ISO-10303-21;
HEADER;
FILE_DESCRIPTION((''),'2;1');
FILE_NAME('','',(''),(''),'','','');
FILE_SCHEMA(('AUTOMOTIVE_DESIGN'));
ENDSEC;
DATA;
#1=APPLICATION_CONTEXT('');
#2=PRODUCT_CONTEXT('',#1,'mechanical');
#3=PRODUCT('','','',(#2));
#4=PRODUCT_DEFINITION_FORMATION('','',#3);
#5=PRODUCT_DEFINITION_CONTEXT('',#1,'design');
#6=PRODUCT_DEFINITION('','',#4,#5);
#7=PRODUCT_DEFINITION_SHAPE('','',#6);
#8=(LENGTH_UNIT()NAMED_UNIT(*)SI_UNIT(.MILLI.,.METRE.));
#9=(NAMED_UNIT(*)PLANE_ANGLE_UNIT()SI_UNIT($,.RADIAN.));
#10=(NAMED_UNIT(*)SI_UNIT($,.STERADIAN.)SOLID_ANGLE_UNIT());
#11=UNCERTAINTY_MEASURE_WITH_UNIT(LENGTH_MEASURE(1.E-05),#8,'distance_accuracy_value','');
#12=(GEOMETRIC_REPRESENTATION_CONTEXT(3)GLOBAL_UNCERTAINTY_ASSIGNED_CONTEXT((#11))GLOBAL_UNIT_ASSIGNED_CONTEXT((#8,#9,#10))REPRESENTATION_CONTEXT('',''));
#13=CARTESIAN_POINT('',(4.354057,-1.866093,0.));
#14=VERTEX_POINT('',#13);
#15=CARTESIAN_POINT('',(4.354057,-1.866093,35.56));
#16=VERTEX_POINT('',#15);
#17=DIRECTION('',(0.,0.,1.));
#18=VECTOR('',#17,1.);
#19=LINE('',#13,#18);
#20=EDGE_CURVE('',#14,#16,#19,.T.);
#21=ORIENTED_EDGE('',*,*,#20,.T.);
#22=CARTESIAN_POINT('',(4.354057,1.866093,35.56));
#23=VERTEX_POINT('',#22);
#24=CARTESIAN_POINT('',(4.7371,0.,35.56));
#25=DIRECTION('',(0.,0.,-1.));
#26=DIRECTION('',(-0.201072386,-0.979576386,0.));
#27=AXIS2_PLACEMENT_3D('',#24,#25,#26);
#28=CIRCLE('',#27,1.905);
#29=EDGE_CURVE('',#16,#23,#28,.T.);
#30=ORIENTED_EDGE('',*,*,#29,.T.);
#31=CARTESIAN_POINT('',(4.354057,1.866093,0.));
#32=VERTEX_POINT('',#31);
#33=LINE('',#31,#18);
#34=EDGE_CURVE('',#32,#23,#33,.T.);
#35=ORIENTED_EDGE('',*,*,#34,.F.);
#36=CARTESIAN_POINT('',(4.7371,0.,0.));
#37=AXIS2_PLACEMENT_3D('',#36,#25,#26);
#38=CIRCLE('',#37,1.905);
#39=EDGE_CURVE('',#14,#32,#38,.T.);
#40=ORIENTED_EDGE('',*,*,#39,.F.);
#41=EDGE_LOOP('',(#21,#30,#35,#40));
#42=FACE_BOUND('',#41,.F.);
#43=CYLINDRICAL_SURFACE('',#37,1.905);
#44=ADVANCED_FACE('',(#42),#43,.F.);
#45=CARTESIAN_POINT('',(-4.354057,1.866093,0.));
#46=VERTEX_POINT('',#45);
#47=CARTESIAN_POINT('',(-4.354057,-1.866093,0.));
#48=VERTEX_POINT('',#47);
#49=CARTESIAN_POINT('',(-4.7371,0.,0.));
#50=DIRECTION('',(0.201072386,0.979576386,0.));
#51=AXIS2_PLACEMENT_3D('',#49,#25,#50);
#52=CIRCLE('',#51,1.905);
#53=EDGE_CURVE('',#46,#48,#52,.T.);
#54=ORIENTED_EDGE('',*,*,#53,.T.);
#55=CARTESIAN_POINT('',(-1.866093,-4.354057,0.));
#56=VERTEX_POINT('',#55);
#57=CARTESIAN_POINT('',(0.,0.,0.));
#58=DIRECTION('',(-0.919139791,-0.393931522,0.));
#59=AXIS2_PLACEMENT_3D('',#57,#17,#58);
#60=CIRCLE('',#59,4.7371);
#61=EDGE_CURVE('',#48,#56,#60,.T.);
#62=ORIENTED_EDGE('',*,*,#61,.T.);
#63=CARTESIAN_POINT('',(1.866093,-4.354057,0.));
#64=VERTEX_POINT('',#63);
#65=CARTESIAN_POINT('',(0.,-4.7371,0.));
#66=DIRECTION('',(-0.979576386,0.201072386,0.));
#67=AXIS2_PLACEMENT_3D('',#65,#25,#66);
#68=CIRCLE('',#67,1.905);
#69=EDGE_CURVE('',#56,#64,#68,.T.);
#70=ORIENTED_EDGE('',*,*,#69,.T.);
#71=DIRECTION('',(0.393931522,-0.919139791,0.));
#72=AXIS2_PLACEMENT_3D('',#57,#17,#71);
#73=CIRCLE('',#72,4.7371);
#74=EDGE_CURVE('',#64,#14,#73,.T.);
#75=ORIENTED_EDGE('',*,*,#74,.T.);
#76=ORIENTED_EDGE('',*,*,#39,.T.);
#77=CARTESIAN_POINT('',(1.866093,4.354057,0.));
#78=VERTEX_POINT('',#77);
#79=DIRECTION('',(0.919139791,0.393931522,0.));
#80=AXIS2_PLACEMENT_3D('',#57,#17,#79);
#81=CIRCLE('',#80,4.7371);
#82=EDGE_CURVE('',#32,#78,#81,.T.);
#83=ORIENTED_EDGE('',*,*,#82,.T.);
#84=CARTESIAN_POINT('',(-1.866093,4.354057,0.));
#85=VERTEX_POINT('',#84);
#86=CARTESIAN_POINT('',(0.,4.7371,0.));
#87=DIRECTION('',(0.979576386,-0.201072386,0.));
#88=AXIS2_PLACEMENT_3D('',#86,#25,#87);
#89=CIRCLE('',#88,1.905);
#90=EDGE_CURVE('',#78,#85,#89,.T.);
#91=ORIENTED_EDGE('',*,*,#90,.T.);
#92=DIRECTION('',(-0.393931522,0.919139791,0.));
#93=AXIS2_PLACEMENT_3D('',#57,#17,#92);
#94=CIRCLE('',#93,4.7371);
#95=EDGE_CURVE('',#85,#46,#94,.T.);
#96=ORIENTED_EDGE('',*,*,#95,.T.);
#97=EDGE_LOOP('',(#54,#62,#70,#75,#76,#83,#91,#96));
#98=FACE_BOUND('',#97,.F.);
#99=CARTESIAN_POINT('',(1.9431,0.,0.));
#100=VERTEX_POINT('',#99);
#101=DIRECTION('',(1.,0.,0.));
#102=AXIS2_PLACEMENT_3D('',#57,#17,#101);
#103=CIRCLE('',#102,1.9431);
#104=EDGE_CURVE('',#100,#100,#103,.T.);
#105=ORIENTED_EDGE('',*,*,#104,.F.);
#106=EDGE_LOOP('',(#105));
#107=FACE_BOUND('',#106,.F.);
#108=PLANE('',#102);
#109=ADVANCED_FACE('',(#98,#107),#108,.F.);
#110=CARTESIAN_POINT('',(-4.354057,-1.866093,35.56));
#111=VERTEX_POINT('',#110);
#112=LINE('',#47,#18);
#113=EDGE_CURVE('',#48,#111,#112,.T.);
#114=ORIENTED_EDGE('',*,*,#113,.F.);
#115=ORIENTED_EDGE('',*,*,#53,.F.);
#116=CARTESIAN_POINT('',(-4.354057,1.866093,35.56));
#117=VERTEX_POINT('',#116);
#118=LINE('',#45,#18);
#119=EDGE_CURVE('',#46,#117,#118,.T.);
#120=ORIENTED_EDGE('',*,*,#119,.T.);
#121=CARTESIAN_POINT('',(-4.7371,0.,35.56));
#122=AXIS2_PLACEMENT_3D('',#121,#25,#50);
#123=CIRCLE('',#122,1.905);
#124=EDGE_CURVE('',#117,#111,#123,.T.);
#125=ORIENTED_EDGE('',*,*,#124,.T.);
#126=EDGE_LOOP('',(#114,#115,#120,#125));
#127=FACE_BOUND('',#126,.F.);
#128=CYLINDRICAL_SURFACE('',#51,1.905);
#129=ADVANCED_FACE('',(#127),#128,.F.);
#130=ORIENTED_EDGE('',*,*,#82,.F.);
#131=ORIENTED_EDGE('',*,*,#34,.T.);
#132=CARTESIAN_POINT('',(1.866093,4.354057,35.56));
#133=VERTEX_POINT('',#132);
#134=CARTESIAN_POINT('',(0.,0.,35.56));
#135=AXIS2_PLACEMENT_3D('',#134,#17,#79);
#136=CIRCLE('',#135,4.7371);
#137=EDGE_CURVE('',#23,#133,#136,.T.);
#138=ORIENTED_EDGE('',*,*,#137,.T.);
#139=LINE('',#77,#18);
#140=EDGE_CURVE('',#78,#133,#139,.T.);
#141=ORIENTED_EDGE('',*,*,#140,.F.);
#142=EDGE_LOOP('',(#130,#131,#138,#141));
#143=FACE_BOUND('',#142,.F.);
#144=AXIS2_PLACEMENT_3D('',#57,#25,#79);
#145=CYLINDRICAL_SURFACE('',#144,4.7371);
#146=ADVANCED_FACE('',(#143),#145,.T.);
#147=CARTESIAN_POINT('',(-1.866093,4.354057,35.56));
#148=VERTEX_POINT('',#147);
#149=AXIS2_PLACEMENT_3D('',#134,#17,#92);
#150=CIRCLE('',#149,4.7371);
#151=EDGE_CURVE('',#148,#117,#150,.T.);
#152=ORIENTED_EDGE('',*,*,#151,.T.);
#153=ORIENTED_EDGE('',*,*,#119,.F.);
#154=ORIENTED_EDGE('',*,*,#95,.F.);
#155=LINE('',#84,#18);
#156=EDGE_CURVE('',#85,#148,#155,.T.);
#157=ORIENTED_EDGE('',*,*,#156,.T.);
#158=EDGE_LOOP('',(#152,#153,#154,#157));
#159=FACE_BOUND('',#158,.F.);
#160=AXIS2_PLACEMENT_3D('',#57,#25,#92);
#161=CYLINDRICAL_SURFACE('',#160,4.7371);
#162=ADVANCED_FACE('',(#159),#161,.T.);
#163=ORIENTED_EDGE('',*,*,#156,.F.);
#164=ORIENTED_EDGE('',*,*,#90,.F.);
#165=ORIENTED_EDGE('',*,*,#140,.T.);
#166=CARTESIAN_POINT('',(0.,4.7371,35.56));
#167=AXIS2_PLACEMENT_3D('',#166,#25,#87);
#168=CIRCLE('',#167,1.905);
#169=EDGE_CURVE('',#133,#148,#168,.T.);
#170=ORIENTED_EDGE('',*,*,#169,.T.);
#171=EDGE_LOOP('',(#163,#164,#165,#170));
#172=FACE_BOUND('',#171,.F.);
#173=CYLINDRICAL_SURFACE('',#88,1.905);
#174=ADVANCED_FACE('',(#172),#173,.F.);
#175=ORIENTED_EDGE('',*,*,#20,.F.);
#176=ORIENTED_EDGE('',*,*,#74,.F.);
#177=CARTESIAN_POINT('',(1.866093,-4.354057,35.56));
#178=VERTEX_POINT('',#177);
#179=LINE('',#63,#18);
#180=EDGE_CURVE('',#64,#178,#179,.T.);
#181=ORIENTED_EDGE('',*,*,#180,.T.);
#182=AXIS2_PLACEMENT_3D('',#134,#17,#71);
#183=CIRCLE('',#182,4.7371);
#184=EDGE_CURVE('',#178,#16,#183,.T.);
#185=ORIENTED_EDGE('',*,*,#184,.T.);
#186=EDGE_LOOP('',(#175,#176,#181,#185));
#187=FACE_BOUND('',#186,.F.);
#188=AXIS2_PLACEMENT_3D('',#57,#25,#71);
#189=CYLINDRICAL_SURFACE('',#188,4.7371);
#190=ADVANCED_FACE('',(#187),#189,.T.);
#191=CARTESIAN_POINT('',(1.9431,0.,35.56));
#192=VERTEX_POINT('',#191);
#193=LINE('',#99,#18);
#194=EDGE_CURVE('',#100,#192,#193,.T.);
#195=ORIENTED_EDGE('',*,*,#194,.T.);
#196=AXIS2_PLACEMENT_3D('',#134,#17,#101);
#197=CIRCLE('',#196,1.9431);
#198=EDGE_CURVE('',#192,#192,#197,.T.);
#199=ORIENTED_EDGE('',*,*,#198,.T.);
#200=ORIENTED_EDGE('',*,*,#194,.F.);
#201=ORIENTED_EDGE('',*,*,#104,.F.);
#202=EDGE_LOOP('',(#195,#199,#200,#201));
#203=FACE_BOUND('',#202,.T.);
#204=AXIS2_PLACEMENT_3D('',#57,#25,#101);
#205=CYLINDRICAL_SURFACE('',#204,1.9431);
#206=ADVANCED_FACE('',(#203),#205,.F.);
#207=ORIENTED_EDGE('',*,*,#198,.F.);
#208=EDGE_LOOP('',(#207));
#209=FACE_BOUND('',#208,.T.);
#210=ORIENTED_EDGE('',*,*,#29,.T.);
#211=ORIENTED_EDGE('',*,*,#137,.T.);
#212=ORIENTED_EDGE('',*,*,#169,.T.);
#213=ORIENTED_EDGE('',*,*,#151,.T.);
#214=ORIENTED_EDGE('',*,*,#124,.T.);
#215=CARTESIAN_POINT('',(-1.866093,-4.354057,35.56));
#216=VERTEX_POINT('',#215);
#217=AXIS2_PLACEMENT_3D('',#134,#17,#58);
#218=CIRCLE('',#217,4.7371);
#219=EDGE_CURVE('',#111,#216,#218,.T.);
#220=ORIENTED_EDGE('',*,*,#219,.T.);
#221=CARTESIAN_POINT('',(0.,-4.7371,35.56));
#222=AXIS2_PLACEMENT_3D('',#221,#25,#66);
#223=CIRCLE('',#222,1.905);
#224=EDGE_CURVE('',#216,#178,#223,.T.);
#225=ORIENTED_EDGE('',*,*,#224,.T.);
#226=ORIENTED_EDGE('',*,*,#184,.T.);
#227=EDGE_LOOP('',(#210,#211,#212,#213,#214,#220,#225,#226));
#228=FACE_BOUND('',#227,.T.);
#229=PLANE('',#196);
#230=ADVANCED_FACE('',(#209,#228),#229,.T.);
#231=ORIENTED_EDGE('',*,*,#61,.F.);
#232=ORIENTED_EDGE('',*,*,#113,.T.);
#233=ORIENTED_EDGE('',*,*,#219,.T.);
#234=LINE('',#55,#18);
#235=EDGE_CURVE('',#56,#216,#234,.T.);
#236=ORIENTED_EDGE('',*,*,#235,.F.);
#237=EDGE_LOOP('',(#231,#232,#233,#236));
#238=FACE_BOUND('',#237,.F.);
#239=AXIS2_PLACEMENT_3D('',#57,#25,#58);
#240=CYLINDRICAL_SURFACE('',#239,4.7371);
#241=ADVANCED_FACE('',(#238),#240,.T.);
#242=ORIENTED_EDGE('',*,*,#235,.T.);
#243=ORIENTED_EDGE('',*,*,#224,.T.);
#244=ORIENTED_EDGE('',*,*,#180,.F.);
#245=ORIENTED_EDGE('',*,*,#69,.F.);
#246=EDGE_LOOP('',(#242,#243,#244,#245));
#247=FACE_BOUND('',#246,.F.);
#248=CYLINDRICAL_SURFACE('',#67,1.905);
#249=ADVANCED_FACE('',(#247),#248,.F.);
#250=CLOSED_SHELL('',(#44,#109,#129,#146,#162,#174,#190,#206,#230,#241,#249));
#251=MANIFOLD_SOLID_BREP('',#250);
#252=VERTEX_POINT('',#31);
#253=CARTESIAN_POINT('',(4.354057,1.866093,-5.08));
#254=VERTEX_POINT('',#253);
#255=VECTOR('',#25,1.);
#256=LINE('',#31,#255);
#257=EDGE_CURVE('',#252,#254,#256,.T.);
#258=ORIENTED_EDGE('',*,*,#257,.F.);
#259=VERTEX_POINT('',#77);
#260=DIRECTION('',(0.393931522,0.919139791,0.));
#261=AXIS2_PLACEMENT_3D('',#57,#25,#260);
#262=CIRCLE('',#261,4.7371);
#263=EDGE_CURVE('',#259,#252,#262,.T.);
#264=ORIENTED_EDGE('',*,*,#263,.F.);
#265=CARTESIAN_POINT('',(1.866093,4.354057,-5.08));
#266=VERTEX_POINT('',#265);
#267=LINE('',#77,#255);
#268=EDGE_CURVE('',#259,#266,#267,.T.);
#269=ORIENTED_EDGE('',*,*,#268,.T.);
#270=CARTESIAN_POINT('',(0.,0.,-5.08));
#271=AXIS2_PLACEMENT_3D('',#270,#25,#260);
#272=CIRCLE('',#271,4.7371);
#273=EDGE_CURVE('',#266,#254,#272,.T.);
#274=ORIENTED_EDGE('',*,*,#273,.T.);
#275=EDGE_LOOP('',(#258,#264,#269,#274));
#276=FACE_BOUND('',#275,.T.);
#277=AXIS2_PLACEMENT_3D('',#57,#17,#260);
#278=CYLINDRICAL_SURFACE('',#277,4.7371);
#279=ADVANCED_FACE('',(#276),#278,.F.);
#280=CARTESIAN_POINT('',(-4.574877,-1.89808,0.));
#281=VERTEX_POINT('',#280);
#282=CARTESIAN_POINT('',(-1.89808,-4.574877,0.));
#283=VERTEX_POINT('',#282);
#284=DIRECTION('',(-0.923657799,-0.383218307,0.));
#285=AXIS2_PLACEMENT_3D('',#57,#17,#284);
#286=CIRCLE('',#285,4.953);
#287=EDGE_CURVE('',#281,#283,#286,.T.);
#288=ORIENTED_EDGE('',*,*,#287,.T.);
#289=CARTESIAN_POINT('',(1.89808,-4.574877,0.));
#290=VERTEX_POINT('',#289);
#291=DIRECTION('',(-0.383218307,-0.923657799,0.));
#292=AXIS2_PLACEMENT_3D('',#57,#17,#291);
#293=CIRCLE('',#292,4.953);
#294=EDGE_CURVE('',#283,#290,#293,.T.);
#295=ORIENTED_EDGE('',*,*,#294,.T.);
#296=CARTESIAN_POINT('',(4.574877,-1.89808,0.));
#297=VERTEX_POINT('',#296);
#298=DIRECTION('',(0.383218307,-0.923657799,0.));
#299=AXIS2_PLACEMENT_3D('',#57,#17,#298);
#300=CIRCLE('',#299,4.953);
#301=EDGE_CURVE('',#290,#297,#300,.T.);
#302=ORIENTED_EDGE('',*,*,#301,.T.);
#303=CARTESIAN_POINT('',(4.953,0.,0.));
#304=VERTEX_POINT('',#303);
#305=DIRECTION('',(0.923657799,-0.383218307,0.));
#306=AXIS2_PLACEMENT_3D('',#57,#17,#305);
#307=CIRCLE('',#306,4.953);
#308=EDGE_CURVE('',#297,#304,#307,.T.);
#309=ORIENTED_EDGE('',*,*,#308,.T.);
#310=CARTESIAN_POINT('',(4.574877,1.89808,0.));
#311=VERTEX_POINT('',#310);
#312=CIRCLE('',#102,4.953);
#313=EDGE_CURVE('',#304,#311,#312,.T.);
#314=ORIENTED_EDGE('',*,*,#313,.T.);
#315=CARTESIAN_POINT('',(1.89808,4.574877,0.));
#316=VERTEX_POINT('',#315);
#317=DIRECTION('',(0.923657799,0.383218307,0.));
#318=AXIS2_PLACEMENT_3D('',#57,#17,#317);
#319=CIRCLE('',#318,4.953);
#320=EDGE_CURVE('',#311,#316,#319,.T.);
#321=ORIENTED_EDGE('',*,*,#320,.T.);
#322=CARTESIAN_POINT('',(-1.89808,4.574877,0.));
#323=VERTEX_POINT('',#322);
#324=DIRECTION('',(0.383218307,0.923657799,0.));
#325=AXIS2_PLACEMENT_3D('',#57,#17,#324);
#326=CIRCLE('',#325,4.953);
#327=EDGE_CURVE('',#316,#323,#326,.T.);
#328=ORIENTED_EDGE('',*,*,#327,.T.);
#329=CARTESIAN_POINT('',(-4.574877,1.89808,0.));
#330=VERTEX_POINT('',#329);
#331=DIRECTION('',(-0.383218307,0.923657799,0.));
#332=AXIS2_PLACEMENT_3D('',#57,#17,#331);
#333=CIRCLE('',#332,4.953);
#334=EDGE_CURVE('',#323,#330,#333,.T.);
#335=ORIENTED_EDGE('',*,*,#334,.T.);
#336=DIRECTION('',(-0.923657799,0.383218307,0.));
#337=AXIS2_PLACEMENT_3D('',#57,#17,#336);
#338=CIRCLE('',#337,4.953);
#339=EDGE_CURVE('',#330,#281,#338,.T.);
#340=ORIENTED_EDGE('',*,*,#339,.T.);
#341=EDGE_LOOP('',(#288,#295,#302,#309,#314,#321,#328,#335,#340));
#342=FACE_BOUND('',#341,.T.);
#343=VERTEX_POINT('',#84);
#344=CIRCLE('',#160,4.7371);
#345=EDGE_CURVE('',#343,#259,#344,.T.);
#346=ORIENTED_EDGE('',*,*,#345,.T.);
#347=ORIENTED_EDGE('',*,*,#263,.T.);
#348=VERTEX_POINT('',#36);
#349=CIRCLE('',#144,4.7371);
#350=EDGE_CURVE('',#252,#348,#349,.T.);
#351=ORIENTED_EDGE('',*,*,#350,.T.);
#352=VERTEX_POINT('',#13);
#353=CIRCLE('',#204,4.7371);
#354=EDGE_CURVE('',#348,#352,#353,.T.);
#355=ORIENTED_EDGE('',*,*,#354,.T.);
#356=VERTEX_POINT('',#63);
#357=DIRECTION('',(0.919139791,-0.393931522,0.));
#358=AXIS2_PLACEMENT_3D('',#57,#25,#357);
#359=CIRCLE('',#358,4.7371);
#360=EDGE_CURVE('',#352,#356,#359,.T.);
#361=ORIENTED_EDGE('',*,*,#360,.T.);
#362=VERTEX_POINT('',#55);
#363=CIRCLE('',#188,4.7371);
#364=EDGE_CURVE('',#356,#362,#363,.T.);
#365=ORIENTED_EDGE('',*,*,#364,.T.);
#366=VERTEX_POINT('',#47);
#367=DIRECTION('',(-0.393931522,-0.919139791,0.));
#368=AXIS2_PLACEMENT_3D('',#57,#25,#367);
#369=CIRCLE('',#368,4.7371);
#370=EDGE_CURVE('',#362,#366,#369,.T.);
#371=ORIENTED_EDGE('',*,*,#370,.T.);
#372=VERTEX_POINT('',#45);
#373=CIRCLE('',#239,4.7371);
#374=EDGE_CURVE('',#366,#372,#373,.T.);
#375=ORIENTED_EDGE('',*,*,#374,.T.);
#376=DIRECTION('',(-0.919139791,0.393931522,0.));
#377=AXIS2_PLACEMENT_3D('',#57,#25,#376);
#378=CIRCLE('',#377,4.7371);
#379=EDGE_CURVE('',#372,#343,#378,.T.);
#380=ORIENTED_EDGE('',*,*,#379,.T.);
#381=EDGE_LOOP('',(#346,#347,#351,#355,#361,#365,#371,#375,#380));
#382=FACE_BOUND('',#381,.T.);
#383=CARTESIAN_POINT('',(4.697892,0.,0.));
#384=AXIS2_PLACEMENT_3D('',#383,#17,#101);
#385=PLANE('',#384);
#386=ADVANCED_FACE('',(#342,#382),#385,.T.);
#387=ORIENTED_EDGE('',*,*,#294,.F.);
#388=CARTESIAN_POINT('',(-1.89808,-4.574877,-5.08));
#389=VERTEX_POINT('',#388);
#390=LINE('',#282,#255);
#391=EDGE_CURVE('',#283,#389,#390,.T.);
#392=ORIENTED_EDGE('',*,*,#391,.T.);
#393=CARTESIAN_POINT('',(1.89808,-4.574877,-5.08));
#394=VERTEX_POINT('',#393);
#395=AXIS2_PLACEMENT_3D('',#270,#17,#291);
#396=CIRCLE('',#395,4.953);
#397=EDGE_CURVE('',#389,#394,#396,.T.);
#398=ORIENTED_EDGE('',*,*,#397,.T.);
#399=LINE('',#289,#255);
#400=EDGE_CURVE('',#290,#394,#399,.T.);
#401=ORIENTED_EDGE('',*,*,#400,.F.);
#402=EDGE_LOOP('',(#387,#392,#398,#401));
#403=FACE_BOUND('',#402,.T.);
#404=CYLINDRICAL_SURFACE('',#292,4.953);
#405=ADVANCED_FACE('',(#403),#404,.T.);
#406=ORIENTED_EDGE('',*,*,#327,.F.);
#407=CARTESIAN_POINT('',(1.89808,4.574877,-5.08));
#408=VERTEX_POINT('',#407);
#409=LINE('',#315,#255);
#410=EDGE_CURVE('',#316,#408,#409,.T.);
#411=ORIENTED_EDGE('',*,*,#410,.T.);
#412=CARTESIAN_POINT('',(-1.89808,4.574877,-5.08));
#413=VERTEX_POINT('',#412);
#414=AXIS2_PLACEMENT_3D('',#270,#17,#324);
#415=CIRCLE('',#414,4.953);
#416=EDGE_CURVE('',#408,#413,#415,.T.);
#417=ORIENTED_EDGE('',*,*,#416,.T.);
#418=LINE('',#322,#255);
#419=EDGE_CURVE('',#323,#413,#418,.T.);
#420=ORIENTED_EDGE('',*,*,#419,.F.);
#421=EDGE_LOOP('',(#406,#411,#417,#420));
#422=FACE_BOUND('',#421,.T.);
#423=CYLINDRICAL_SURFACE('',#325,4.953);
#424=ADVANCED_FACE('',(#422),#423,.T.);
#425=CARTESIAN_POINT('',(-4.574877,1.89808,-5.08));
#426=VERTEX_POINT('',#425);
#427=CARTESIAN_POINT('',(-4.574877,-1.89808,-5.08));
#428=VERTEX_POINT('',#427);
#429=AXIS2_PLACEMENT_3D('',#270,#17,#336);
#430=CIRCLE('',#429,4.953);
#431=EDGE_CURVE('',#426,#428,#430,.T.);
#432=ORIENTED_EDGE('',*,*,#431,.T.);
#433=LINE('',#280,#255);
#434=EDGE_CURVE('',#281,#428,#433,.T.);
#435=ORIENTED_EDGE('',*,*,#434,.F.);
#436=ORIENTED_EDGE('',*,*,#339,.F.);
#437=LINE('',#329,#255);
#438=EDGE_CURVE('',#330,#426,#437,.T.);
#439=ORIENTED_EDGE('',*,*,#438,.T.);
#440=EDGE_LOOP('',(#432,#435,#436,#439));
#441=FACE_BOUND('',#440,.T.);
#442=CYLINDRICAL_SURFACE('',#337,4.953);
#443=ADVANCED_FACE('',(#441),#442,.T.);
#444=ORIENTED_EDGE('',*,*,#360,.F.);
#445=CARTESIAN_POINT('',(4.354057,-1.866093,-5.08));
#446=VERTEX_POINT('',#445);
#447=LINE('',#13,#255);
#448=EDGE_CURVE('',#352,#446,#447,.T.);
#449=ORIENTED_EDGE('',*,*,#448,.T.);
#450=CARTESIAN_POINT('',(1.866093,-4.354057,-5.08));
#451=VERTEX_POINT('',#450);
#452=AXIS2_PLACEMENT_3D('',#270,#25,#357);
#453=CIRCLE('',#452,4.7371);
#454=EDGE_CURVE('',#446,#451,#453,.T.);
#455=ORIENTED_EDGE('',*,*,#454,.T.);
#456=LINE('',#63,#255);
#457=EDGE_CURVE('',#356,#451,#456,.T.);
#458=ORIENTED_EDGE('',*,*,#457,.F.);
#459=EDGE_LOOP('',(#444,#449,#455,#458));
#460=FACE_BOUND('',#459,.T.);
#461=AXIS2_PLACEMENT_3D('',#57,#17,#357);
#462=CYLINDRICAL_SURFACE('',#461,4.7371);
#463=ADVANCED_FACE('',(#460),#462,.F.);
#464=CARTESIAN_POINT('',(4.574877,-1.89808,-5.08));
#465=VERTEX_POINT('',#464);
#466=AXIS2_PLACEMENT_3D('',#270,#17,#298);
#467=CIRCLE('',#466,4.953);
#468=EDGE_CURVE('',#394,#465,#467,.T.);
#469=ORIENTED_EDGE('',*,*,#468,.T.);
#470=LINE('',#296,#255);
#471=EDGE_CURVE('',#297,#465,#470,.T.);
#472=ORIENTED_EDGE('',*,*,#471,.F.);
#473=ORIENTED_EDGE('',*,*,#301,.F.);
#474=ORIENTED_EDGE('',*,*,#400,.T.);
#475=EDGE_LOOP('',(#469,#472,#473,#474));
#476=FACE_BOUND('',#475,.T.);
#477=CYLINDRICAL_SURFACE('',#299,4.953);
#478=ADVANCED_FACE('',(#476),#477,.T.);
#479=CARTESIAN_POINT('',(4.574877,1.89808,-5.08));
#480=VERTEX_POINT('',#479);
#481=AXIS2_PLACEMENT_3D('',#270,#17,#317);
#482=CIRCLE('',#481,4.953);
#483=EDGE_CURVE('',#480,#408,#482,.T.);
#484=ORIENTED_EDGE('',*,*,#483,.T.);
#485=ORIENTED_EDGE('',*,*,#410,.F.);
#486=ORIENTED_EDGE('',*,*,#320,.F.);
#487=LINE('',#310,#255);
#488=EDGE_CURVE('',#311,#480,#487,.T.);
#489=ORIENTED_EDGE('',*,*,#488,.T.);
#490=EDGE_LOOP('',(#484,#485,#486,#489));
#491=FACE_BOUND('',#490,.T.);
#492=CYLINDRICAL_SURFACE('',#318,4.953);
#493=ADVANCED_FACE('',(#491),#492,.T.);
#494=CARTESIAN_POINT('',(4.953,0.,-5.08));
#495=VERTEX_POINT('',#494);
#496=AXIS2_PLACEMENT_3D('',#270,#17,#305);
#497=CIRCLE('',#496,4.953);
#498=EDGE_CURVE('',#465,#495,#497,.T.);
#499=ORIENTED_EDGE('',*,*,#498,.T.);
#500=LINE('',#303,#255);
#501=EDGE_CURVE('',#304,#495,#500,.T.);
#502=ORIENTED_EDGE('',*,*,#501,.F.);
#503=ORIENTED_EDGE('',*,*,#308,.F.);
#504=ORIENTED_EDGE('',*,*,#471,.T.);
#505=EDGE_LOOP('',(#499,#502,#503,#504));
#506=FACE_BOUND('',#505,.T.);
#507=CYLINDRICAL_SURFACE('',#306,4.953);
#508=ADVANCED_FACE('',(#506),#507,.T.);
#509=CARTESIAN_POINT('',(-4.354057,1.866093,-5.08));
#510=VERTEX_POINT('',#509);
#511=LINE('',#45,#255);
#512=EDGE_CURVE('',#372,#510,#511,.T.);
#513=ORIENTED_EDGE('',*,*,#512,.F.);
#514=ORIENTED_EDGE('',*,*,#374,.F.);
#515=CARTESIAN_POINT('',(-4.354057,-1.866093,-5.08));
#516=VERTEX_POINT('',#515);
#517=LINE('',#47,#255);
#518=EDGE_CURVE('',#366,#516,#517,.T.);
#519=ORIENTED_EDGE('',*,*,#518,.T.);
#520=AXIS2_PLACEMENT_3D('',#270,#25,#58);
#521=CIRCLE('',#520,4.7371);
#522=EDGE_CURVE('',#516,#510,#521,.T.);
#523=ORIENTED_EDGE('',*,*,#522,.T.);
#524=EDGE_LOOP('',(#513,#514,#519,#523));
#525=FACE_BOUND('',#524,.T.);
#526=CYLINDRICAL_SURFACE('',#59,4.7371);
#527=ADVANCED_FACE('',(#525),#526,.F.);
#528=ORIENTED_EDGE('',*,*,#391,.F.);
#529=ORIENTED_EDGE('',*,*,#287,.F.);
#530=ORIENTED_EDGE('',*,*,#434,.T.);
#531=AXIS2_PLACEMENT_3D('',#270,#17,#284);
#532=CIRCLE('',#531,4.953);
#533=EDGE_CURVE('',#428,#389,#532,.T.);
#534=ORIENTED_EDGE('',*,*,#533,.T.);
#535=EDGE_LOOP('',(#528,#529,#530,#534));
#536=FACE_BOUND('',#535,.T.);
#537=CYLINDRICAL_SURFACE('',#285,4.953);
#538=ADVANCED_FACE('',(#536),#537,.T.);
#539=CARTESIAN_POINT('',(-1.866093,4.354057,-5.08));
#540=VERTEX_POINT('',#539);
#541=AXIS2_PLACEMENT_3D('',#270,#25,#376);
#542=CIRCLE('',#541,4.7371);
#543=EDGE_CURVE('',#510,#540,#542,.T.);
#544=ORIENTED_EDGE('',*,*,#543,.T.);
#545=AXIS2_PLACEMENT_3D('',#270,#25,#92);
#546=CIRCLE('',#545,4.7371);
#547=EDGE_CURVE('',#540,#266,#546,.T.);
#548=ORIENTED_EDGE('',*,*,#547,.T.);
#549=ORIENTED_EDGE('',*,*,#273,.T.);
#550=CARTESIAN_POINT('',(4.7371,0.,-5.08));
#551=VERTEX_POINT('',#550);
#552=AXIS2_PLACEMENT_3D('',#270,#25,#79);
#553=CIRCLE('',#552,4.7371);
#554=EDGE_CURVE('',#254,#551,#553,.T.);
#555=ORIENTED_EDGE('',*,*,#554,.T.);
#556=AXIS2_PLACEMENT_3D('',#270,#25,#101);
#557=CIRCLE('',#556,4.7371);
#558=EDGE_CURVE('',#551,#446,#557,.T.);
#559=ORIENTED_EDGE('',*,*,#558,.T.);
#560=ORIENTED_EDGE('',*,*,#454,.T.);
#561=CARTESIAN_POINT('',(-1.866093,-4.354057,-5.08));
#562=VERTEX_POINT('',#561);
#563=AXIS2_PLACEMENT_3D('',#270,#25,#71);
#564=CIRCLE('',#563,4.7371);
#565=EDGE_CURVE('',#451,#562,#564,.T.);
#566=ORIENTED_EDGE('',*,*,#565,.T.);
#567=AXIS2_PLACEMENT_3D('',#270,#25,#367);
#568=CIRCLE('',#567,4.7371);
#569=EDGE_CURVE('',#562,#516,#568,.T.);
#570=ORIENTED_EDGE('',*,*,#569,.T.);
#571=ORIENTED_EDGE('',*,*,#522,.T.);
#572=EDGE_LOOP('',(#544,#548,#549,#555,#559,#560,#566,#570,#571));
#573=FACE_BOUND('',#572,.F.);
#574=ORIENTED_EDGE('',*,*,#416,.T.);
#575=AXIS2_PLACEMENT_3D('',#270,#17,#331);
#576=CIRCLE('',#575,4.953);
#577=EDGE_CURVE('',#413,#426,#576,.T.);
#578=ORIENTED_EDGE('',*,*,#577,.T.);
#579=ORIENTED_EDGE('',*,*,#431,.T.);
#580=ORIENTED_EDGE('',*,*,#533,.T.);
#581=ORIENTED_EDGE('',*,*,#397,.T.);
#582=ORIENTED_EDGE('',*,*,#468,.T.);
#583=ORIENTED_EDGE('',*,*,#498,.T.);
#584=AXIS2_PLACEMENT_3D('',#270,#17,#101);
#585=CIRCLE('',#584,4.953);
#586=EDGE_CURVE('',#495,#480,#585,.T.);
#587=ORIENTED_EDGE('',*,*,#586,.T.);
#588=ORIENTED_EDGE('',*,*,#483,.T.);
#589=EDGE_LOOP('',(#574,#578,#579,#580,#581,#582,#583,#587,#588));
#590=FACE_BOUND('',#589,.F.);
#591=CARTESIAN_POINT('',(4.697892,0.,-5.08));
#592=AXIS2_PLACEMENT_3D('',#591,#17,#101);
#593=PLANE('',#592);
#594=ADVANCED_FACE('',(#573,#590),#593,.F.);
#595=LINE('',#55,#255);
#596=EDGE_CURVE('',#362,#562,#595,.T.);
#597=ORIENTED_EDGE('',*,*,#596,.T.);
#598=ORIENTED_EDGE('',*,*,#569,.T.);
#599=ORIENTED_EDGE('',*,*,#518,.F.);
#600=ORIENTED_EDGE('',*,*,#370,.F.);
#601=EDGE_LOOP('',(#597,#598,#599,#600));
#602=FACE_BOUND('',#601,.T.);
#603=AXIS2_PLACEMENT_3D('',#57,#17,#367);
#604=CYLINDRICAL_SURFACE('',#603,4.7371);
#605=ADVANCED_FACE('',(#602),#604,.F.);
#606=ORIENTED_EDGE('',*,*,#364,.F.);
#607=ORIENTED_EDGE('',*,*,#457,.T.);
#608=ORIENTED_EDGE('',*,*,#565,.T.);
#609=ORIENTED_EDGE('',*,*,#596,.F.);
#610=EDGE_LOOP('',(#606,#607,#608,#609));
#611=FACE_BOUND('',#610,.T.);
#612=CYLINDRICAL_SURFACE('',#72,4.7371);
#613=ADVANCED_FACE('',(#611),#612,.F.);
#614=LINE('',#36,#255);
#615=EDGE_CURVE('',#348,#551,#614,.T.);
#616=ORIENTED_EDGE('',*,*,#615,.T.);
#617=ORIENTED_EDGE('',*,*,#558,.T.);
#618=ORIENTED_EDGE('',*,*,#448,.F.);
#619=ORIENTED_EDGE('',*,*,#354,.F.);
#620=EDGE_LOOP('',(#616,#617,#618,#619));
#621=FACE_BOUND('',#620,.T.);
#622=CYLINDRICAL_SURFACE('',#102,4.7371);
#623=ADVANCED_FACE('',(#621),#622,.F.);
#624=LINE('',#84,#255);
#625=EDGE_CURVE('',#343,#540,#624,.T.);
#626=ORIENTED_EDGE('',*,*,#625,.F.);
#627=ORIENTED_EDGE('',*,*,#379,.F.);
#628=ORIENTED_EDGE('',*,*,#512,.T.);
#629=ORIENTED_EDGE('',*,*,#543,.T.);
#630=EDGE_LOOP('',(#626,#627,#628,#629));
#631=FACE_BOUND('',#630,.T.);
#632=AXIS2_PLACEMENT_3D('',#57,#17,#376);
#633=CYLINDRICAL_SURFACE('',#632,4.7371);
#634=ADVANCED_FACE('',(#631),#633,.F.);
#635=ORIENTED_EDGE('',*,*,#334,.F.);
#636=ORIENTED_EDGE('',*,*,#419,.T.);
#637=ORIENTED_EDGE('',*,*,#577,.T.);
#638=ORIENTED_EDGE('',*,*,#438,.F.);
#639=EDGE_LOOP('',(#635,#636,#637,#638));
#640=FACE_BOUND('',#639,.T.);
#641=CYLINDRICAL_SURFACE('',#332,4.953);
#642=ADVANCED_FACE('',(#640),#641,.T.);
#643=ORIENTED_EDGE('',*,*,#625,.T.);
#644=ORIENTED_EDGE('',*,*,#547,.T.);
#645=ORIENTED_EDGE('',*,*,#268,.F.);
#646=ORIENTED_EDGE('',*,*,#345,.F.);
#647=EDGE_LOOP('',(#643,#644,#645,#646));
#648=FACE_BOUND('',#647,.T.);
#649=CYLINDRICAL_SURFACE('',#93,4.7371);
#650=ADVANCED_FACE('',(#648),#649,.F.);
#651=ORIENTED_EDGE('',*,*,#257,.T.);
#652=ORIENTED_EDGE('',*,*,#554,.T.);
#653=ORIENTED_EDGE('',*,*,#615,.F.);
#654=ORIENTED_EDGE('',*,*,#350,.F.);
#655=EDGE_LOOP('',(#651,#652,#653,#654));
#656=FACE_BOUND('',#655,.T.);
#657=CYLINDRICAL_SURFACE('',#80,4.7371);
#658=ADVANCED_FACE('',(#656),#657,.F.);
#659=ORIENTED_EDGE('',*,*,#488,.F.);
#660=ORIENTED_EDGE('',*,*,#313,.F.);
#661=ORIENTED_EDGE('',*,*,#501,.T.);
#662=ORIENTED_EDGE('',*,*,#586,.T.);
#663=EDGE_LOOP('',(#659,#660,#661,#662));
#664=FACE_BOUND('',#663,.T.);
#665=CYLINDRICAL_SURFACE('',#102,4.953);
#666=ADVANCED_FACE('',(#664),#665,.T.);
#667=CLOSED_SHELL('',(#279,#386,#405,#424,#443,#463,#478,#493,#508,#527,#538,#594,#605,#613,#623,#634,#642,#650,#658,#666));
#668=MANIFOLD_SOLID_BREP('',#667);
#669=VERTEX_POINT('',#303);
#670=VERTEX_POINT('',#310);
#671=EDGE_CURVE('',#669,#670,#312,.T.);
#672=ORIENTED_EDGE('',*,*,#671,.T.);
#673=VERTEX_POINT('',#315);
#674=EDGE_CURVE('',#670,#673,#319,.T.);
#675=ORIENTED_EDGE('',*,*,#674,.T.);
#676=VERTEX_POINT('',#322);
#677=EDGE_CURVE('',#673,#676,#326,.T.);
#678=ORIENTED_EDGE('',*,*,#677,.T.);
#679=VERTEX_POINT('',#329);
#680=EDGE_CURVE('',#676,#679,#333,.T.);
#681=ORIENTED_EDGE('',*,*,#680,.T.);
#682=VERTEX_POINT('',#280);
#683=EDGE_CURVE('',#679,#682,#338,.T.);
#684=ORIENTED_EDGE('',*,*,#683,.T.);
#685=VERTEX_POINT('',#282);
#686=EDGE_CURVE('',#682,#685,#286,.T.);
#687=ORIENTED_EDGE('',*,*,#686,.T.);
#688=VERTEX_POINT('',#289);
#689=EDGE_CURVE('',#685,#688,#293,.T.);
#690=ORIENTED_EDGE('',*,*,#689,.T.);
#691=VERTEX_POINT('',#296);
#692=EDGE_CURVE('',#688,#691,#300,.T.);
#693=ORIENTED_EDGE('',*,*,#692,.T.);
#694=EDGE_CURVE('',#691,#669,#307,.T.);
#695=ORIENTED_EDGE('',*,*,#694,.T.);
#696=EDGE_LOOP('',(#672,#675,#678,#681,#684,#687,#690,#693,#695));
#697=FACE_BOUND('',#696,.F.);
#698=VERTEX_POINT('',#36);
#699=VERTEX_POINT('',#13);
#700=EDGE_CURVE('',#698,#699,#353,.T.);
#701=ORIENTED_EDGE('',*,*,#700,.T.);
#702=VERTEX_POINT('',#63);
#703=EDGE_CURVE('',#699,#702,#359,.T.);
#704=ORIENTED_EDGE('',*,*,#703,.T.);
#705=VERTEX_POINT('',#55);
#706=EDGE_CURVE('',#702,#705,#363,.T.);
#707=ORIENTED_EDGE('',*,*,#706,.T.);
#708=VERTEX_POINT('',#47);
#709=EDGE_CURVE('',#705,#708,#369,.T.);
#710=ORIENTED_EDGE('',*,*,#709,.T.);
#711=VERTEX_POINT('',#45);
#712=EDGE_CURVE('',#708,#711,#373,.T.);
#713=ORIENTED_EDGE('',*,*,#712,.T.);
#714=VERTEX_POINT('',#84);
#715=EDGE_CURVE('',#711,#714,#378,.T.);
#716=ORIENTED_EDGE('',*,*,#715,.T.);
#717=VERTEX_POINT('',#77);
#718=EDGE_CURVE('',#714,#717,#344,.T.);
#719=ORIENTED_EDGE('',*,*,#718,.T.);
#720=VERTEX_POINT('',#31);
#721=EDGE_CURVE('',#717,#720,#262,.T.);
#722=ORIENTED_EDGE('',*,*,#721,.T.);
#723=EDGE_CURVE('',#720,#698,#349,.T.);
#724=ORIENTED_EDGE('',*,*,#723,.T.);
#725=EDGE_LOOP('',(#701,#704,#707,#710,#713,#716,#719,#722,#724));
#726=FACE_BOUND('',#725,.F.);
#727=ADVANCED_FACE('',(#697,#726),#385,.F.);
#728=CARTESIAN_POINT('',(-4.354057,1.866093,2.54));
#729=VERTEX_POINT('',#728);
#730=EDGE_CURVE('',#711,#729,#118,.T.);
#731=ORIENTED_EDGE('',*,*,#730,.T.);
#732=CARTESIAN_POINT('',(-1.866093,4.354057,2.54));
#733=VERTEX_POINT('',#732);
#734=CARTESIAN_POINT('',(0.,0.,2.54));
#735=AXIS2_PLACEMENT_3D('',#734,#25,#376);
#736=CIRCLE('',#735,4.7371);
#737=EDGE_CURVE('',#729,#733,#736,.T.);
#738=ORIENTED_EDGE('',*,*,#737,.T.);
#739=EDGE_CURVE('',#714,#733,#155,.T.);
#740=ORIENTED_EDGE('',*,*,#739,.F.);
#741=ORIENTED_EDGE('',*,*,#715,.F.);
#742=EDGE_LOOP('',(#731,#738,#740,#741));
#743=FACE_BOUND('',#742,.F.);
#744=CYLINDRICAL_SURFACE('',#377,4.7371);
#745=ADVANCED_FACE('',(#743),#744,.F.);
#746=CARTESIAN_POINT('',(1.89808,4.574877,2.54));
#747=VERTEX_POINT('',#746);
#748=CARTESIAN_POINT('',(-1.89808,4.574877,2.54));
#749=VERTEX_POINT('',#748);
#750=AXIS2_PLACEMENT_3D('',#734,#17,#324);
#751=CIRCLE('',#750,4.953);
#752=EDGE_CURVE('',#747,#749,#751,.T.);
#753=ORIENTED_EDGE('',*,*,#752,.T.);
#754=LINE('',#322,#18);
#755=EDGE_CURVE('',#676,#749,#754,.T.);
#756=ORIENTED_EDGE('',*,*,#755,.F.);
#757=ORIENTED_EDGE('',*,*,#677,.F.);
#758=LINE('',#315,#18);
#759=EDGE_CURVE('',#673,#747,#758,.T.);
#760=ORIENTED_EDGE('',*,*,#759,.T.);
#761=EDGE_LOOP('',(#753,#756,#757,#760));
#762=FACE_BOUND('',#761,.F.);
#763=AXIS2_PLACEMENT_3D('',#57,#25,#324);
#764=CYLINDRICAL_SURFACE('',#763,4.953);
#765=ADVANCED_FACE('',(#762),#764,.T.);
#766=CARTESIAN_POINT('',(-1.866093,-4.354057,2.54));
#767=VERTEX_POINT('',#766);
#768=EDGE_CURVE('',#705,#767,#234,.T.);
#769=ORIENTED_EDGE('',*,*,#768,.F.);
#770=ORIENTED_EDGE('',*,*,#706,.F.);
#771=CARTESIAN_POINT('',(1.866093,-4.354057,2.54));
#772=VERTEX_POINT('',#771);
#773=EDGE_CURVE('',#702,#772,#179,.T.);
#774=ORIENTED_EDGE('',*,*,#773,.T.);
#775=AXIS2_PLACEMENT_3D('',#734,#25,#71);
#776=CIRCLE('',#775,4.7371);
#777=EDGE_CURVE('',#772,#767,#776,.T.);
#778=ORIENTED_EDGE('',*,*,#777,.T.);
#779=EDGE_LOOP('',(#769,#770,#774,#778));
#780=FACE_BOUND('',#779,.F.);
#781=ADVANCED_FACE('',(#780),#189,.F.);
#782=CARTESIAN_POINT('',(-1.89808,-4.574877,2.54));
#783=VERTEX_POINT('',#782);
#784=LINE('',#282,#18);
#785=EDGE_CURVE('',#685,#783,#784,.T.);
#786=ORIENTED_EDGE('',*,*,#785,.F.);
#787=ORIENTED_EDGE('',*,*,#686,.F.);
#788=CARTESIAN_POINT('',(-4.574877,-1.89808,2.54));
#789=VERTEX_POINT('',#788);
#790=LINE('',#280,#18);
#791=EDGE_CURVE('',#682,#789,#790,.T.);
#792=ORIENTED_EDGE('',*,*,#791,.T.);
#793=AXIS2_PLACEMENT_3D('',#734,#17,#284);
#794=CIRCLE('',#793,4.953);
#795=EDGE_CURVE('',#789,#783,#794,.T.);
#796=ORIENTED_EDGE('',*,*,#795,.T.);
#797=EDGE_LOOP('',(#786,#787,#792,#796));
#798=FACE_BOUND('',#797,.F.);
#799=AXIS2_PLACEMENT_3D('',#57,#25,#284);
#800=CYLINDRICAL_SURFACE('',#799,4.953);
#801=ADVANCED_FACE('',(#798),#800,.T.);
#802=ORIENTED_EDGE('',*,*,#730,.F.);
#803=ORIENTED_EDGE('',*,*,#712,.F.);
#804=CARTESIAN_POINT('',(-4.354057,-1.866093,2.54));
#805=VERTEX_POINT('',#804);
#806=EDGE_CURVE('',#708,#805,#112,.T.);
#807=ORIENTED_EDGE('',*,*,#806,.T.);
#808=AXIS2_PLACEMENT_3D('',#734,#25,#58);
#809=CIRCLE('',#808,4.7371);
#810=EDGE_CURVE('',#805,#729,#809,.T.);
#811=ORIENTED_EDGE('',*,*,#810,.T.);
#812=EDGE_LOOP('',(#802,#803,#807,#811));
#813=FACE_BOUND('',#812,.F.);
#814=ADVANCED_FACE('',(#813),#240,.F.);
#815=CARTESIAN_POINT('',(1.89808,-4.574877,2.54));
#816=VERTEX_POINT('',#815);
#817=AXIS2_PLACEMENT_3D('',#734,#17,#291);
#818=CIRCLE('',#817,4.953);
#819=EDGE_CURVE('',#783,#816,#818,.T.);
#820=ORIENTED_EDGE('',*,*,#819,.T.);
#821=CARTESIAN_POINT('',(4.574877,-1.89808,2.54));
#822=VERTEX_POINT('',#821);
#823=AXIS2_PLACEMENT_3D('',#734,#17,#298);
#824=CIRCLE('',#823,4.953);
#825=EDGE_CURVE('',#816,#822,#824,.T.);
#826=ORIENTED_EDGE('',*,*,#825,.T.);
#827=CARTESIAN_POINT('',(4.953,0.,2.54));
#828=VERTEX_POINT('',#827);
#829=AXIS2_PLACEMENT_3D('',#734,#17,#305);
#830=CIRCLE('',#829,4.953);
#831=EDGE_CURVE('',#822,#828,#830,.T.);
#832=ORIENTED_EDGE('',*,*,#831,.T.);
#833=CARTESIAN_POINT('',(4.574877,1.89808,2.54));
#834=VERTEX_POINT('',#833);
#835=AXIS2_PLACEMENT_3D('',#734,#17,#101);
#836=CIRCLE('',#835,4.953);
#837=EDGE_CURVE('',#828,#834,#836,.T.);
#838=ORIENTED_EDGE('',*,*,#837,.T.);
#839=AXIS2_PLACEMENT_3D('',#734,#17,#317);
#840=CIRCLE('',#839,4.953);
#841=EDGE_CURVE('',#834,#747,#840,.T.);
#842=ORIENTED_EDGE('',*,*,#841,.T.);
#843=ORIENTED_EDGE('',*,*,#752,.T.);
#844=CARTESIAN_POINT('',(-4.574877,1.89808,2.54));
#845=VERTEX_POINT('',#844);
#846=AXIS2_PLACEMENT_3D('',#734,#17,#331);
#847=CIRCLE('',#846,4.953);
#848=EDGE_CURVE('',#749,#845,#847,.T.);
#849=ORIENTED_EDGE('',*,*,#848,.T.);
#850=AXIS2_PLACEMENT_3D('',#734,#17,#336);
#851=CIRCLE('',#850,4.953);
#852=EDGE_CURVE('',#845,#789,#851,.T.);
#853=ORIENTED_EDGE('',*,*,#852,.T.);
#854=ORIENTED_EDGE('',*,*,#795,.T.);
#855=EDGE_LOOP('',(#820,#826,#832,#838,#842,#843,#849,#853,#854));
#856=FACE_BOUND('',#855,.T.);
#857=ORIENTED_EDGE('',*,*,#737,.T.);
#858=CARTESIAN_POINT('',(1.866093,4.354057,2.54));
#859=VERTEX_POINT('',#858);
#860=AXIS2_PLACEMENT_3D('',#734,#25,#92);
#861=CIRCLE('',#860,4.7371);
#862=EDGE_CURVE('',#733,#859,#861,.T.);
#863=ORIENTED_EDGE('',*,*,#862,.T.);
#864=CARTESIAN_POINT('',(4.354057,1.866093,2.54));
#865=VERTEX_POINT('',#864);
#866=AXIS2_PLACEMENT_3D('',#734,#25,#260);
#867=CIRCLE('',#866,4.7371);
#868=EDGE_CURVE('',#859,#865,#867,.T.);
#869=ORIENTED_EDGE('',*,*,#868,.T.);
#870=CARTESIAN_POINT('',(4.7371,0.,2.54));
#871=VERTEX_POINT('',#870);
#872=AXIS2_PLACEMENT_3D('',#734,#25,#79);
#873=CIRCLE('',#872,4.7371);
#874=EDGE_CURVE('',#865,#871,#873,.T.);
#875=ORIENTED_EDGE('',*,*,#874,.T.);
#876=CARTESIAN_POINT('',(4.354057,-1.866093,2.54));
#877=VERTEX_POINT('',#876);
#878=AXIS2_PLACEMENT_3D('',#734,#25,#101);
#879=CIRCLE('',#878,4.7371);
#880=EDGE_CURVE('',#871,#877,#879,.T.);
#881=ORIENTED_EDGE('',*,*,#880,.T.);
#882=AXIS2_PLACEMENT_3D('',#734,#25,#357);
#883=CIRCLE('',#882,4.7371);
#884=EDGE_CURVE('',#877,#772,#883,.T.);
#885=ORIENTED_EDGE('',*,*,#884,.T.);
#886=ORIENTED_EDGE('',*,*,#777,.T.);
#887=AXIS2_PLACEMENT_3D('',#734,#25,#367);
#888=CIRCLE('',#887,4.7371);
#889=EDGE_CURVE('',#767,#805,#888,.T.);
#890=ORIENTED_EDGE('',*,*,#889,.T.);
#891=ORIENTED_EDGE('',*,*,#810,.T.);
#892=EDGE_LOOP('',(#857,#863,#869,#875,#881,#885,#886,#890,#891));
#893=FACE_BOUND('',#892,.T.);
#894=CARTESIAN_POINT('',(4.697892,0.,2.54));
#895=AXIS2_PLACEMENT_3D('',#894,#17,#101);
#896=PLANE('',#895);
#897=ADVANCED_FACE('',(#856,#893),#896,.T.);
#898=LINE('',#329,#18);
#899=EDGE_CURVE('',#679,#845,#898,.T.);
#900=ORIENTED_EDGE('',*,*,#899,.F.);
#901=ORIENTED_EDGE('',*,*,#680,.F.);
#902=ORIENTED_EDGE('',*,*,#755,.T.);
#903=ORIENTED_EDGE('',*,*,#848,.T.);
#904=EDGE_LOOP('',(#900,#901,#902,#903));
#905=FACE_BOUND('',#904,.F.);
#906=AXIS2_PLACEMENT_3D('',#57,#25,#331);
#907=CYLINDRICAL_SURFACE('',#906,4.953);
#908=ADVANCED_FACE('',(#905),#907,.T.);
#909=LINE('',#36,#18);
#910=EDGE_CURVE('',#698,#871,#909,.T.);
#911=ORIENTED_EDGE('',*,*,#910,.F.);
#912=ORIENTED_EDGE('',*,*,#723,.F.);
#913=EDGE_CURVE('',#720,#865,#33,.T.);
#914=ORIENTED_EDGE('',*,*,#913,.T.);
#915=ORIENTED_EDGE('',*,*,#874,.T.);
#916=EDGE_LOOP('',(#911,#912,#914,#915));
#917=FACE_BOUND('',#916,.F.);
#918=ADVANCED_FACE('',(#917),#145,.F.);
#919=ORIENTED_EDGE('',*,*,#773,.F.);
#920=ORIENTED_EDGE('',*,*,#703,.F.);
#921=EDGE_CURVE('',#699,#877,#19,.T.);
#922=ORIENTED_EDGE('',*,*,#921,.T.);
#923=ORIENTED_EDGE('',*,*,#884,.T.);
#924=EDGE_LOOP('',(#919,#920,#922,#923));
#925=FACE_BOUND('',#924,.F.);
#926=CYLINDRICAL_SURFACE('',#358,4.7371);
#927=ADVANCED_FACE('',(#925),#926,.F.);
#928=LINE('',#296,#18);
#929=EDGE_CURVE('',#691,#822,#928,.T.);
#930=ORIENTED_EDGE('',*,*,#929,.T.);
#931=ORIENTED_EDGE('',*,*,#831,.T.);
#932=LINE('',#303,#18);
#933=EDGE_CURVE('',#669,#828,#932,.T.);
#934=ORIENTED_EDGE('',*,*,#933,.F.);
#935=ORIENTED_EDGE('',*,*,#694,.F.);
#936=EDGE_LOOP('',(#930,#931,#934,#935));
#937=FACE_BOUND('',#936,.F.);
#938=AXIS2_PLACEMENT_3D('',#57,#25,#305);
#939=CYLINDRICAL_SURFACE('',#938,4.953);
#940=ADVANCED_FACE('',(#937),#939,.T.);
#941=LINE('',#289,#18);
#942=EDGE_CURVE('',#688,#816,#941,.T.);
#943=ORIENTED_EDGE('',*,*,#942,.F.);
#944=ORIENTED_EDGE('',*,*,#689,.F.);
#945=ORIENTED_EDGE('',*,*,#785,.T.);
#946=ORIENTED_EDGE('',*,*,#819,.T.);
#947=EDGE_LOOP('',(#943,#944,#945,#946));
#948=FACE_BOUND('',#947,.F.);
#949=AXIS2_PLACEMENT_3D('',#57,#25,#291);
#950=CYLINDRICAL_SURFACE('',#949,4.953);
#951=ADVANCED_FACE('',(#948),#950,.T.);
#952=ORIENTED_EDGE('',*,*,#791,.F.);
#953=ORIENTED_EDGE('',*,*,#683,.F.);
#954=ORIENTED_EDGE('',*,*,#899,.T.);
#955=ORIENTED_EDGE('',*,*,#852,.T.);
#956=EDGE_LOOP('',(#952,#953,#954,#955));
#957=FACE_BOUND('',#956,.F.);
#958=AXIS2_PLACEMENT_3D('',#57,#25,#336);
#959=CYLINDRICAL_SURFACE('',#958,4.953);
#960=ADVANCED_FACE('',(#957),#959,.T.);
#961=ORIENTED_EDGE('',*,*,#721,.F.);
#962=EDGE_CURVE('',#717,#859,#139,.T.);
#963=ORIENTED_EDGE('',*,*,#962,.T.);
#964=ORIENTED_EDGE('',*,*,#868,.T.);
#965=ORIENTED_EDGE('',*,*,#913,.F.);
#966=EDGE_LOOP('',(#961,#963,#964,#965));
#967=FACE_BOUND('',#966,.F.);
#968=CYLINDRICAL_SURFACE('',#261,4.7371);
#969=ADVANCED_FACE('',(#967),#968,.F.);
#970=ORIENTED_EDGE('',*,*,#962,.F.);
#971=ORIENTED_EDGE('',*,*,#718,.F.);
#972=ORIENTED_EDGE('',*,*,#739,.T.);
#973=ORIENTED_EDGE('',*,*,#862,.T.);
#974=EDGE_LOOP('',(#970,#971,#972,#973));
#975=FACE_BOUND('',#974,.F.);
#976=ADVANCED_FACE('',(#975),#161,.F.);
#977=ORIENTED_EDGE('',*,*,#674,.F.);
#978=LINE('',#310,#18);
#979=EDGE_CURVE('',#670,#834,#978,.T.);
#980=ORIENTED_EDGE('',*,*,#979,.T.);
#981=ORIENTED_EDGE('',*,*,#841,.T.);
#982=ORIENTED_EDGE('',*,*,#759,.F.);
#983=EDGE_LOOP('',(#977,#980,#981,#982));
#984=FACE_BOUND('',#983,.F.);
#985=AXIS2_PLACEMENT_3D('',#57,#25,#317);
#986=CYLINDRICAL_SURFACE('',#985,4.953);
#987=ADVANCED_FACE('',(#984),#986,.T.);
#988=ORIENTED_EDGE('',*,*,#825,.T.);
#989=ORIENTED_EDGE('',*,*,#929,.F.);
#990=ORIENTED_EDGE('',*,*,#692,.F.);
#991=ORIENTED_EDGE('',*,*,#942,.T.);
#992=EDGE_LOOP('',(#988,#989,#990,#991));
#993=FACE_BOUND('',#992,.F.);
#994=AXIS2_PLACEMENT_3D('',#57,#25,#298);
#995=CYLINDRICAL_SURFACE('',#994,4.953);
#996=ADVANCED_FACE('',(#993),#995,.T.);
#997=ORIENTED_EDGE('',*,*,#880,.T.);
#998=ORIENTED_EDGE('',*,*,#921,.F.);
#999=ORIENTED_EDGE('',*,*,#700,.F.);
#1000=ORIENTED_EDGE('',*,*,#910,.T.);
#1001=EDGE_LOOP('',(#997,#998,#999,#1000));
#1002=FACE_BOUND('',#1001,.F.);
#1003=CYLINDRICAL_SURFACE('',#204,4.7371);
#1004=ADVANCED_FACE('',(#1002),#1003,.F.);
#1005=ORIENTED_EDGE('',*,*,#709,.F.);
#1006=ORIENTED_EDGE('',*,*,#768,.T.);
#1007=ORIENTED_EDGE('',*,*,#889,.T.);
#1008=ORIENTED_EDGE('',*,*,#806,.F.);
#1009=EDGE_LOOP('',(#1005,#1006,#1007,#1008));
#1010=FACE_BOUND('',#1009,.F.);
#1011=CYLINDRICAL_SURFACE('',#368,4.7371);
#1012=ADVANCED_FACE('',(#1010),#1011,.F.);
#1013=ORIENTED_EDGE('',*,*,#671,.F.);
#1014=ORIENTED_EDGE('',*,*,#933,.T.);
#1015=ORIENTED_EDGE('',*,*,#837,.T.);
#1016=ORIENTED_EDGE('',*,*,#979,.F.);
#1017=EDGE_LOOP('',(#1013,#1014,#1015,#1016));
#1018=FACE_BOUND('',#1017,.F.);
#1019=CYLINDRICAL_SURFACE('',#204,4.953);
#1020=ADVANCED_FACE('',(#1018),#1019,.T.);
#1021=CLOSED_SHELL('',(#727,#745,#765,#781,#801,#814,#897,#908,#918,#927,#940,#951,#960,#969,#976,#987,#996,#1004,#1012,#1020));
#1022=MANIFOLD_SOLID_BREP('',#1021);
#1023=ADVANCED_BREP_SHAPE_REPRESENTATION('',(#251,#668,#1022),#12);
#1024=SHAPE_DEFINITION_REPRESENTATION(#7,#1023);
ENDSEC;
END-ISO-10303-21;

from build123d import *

# Parameters (mm, degrees)
F1_DEPTH = 5.08
F0_R     = 1.9431
F2_DEPTH = 35.56
F3_DEPTH = 2.54


with BuildPart() as f1:
    # F0 (on Top) → F1 (new body)
    with BuildSketch(Plane.XY):
        with BuildLine():
            ThreePointArc((4.5748770777, -1.8980802732), (4.8575495451, -0.9676886984), (4.953, 0))
            ThreePointArc((4.953, 0), (4.8575495451, 0.9676886984), (4.5748770777, 1.8980802732))
            ThreePointArc((4.5748770777, 1.8980802732), (4.4639983721, 1.8853223864), (4.3540571046, 1.8660930149))
            ThreePointArc((4.3540571046, 1.8660930149), (4.640351297, 0.9525), (4.7371, 0))
            ThreePointArc((4.7371, 0), (4.640351297, -0.9525), (4.3540571046, -1.8660930149))
            ThreePointArc((4.3540571046, -1.8660930149), (4.4639983721, -1.8853223864), (4.5748770777, -1.8980802732))
        make_face()
        with BuildLine():
            ThreePointArc((4.3540571046, 1.8660930149), (4.4639983721, 1.8853223864), (4.5748770777, 1.8980802732))
            ThreePointArc((4.5748770777, 1.8980802732), (3.5022998872, 3.5022998872), (1.8980802732, 4.5748770777))
            ThreePointArc((1.8980802732, 4.5748770777), (1.8853223864, 4.4639983721), (1.8660930149, 4.3540571046))
            ThreePointArc((1.8660930149, 4.3540571046), (3.3496355332, 3.3496355332), (4.3540571046, 1.8660930149))
        make_face()
        with BuildLine():
            ThreePointArc((1.8980802732, -4.5748770777), (3.5022998872, -3.5022998872), (4.5748770777, -1.8980802732))
            ThreePointArc((4.5748770777, -1.8980802732), (4.4639983721, -1.8853223864), (4.3540571046, -1.8660930149))
            ThreePointArc((4.3540571046, -1.8660930149), (3.3496355332, -3.3496355332), (1.8660930149, -4.3540571046))
            ThreePointArc((1.8660930149, -4.3540571046), (1.8853223864, -4.4639983721), (1.8980802732, -4.5748770777))
        make_face()
        with BuildLine():
            ThreePointArc((1.8660930149, 4.3540571046), (1.8853223864, 4.4639983721), (1.8980802732, 4.5748770777))
            ThreePointArc((1.8980802732, 4.5748770777), (0, 4.953), (-1.8980802732, 4.5748770777))
            ThreePointArc((-1.8980802732, 4.5748770777), (-1.8853223864, 4.4639983721), (-1.8660930149, 4.3540571046))
            ThreePointArc((-1.8660930149, 4.3540571046), (0, 4.7371), (1.8660930149, 4.3540571046))
        make_face()
        with BuildLine():
            ThreePointArc((-1.8980802732, -4.5748770777), (0, -4.953), (1.8980802732, -4.5748770777))
            ThreePointArc((1.8980802732, -4.5748770777), (1.8853223864, -4.4639983721), (1.8660930149, -4.3540571046))
            ThreePointArc((1.8660930149, -4.3540571046), (0, -4.7371), (-1.8660930149, -4.3540571046))
            ThreePointArc((-1.8660930149, -4.3540571046), (-1.8853223864, -4.4639983721), (-1.8980802732, -4.5748770777))
        make_face()
        with BuildLine():
            ThreePointArc((-1.8660930149, 4.3540571046), (-1.8853223864, 4.4639983721), (-1.8980802732, 4.5748770777))
            ThreePointArc((-1.8980802732, 4.5748770777), (-3.5022998872, 3.5022998872), (-4.5748770777, 1.8980802732))
            ThreePointArc((-4.5748770777, 1.8980802732), (-4.4639983721, 1.8853223864), (-4.3540571046, 1.8660930149))
            ThreePointArc((-4.3540571046, 1.8660930149), (-3.3496355332, 3.3496355332), (-1.8660930149, 4.3540571046))
        make_face()
        with BuildLine():
            ThreePointArc((-4.5748770777, -1.8980802732), (-3.5022998872, -3.5022998872), (-1.8980802732, -4.5748770777))
            ThreePointArc((-1.8980802732, -4.5748770777), (-1.8853223864, -4.4639983721), (-1.8660930149, -4.3540571046))
            ThreePointArc((-1.8660930149, -4.3540571046), (-3.3496355332, -3.3496355332), (-4.3540571046, -1.8660930149))
            ThreePointArc((-4.3540571046, -1.8660930149), (-4.4639983721, -1.8853223864), (-4.5748770777, -1.8980802732))
        make_face()
        with BuildLine():
            ThreePointArc((-4.3540571046, 1.8660930149), (-4.4639983721, 1.8853223864), (-4.5748770777, 1.8980802732))
            ThreePointArc((-4.5748770777, 1.8980802732), (-4.953, 0), (-4.5748770777, -1.8980802732))
            ThreePointArc((-4.5748770777, -1.8980802732), (-4.4639983721, -1.8853223864), (-4.3540571046, -1.8660930149))
            ThreePointArc((-4.3540571046, -1.8660930149), (-4.7371, 0), (-4.3540571046, 1.8660930149))
        make_face()
    extrude(amount=-F1_DEPTH)


with BuildPart() as f2:
    # F0 (on Top) → F2 (new body)
    with BuildSketch(Plane.XY):
        with BuildLine():
            ThreePointArc((4.3540571046, -1.8660930149), (2.8321, 0), (4.3540571046, 1.8660930149))
            ThreePointArc((4.3540571046, 1.8660930149), (3.3496355332, 3.3496355332), (1.8660930149, 4.3540571046))
            ThreePointArc((1.8660930149, 4.3540571046), (0, 2.8321), (-1.8660930149, 4.3540571046))
            ThreePointArc((-1.8660930149, 4.3540571046), (-3.3496355332, 3.3496355332), (-4.3540571046, 1.8660930149))
            ThreePointArc((-4.3540571046, 1.8660930149), (-2.8321, 0), (-4.3540571046, -1.8660930149))
            ThreePointArc((-4.3540571046, -1.8660930149), (-3.3496355332, -3.3496355332), (-1.8660930149, -4.3540571046))
            ThreePointArc((-1.8660930149, -4.3540571046), (0, -2.8321), (1.8660930149, -4.3540571046))
            ThreePointArc((1.8660930149, -4.3540571046), (3.3496355332, -3.3496355332), (4.3540571046, -1.8660930149))
        make_face()
        Circle(F0_R, mode=Mode.SUBTRACT)
    extrude(amount=F2_DEPTH)


with BuildPart() as f3:
    # F0 (on Top) → F3 (new body)
    with BuildSketch(Plane.XY):
        with BuildLine():
            ThreePointArc((4.5748770777, -1.8980802732), (4.8575495451, -0.9676886984), (4.953, 0))
            ThreePointArc((4.953, 0), (4.8575495451, 0.9676886984), (4.5748770777, 1.8980802732))
            ThreePointArc((4.5748770777, 1.8980802732), (4.4639983721, 1.8853223864), (4.3540571046, 1.8660930149))
            ThreePointArc((4.3540571046, 1.8660930149), (4.640351297, 0.9525), (4.7371, 0))
            ThreePointArc((4.7371, 0), (4.640351297, -0.9525), (4.3540571046, -1.8660930149))
            ThreePointArc((4.3540571046, -1.8660930149), (4.4639983721, -1.8853223864), (4.5748770777, -1.8980802732))
        make_face()
        with BuildLine():
            ThreePointArc((4.3540571046, 1.8660930149), (4.4639983721, 1.8853223864), (4.5748770777, 1.8980802732))
            ThreePointArc((4.5748770777, 1.8980802732), (3.5022998872, 3.5022998872), (1.8980802732, 4.5748770777))
            ThreePointArc((1.8980802732, 4.5748770777), (1.8853223864, 4.4639983721), (1.8660930149, 4.3540571046))
            ThreePointArc((1.8660930149, 4.3540571046), (3.3496355332, 3.3496355332), (4.3540571046, 1.8660930149))
        make_face()
        with BuildLine():
            ThreePointArc((1.8980802732, -4.5748770777), (3.5022998872, -3.5022998872), (4.5748770777, -1.8980802732))
            ThreePointArc((4.5748770777, -1.8980802732), (4.4639983721, -1.8853223864), (4.3540571046, -1.8660930149))
            ThreePointArc((4.3540571046, -1.8660930149), (3.3496355332, -3.3496355332), (1.8660930149, -4.3540571046))
            ThreePointArc((1.8660930149, -4.3540571046), (1.8853223864, -4.4639983721), (1.8980802732, -4.5748770777))
        make_face()
        with BuildLine():
            ThreePointArc((1.8660930149, 4.3540571046), (1.8853223864, 4.4639983721), (1.8980802732, 4.5748770777))
            ThreePointArc((1.8980802732, 4.5748770777), (0, 4.953), (-1.8980802732, 4.5748770777))
            ThreePointArc((-1.8980802732, 4.5748770777), (-1.8853223864, 4.4639983721), (-1.8660930149, 4.3540571046))
            ThreePointArc((-1.8660930149, 4.3540571046), (0, 4.7371), (1.8660930149, 4.3540571046))
        make_face()
        with BuildLine():
            ThreePointArc((-1.8980802732, -4.5748770777), (0, -4.953), (1.8980802732, -4.5748770777))
            ThreePointArc((1.8980802732, -4.5748770777), (1.8853223864, -4.4639983721), (1.8660930149, -4.3540571046))
            ThreePointArc((1.8660930149, -4.3540571046), (0, -4.7371), (-1.8660930149, -4.3540571046))
            ThreePointArc((-1.8660930149, -4.3540571046), (-1.8853223864, -4.4639983721), (-1.8980802732, -4.5748770777))
        make_face()
        with BuildLine():
            ThreePointArc((-1.8660930149, 4.3540571046), (-1.8853223864, 4.4639983721), (-1.8980802732, 4.5748770777))
            ThreePointArc((-1.8980802732, 4.5748770777), (-3.5022998872, 3.5022998872), (-4.5748770777, 1.8980802732))
            ThreePointArc((-4.5748770777, 1.8980802732), (-4.4639983721, 1.8853223864), (-4.3540571046, 1.8660930149))
            ThreePointArc((-4.3540571046, 1.8660930149), (-3.3496355332, 3.3496355332), (-1.8660930149, 4.3540571046))
        make_face()
        with BuildLine():
            ThreePointArc((-4.5748770777, -1.8980802732), (-3.5022998872, -3.5022998872), (-1.8980802732, -4.5748770777))
            ThreePointArc((-1.8980802732, -4.5748770777), (-1.8853223864, -4.4639983721), (-1.8660930149, -4.3540571046))
            ThreePointArc((-1.8660930149, -4.3540571046), (-3.3496355332, -3.3496355332), (-4.3540571046, -1.8660930149))
            ThreePointArc((-4.3540571046, -1.8660930149), (-4.4639983721, -1.8853223864), (-4.5748770777, -1.8980802732))
        make_face()
        with BuildLine():
            ThreePointArc((-4.3540571046, 1.8660930149), (-4.4639983721, 1.8853223864), (-4.5748770777, 1.8980802732))
            ThreePointArc((-4.5748770777, 1.8980802732), (-4.953, 0), (-4.5748770777, -1.8980802732))
            ThreePointArc((-4.5748770777, -1.8980802732), (-4.4639983721, -1.8853223864), (-4.3540571046, -1.8660930149))
            ThreePointArc((-4.3540571046, -1.8660930149), (-4.7371, 0), (-4.3540571046, 1.8660930149))
        make_face()
    extrude(amount=F3_DEPTH)


solid = Compound([f1.part, f2.part, f3.part])
